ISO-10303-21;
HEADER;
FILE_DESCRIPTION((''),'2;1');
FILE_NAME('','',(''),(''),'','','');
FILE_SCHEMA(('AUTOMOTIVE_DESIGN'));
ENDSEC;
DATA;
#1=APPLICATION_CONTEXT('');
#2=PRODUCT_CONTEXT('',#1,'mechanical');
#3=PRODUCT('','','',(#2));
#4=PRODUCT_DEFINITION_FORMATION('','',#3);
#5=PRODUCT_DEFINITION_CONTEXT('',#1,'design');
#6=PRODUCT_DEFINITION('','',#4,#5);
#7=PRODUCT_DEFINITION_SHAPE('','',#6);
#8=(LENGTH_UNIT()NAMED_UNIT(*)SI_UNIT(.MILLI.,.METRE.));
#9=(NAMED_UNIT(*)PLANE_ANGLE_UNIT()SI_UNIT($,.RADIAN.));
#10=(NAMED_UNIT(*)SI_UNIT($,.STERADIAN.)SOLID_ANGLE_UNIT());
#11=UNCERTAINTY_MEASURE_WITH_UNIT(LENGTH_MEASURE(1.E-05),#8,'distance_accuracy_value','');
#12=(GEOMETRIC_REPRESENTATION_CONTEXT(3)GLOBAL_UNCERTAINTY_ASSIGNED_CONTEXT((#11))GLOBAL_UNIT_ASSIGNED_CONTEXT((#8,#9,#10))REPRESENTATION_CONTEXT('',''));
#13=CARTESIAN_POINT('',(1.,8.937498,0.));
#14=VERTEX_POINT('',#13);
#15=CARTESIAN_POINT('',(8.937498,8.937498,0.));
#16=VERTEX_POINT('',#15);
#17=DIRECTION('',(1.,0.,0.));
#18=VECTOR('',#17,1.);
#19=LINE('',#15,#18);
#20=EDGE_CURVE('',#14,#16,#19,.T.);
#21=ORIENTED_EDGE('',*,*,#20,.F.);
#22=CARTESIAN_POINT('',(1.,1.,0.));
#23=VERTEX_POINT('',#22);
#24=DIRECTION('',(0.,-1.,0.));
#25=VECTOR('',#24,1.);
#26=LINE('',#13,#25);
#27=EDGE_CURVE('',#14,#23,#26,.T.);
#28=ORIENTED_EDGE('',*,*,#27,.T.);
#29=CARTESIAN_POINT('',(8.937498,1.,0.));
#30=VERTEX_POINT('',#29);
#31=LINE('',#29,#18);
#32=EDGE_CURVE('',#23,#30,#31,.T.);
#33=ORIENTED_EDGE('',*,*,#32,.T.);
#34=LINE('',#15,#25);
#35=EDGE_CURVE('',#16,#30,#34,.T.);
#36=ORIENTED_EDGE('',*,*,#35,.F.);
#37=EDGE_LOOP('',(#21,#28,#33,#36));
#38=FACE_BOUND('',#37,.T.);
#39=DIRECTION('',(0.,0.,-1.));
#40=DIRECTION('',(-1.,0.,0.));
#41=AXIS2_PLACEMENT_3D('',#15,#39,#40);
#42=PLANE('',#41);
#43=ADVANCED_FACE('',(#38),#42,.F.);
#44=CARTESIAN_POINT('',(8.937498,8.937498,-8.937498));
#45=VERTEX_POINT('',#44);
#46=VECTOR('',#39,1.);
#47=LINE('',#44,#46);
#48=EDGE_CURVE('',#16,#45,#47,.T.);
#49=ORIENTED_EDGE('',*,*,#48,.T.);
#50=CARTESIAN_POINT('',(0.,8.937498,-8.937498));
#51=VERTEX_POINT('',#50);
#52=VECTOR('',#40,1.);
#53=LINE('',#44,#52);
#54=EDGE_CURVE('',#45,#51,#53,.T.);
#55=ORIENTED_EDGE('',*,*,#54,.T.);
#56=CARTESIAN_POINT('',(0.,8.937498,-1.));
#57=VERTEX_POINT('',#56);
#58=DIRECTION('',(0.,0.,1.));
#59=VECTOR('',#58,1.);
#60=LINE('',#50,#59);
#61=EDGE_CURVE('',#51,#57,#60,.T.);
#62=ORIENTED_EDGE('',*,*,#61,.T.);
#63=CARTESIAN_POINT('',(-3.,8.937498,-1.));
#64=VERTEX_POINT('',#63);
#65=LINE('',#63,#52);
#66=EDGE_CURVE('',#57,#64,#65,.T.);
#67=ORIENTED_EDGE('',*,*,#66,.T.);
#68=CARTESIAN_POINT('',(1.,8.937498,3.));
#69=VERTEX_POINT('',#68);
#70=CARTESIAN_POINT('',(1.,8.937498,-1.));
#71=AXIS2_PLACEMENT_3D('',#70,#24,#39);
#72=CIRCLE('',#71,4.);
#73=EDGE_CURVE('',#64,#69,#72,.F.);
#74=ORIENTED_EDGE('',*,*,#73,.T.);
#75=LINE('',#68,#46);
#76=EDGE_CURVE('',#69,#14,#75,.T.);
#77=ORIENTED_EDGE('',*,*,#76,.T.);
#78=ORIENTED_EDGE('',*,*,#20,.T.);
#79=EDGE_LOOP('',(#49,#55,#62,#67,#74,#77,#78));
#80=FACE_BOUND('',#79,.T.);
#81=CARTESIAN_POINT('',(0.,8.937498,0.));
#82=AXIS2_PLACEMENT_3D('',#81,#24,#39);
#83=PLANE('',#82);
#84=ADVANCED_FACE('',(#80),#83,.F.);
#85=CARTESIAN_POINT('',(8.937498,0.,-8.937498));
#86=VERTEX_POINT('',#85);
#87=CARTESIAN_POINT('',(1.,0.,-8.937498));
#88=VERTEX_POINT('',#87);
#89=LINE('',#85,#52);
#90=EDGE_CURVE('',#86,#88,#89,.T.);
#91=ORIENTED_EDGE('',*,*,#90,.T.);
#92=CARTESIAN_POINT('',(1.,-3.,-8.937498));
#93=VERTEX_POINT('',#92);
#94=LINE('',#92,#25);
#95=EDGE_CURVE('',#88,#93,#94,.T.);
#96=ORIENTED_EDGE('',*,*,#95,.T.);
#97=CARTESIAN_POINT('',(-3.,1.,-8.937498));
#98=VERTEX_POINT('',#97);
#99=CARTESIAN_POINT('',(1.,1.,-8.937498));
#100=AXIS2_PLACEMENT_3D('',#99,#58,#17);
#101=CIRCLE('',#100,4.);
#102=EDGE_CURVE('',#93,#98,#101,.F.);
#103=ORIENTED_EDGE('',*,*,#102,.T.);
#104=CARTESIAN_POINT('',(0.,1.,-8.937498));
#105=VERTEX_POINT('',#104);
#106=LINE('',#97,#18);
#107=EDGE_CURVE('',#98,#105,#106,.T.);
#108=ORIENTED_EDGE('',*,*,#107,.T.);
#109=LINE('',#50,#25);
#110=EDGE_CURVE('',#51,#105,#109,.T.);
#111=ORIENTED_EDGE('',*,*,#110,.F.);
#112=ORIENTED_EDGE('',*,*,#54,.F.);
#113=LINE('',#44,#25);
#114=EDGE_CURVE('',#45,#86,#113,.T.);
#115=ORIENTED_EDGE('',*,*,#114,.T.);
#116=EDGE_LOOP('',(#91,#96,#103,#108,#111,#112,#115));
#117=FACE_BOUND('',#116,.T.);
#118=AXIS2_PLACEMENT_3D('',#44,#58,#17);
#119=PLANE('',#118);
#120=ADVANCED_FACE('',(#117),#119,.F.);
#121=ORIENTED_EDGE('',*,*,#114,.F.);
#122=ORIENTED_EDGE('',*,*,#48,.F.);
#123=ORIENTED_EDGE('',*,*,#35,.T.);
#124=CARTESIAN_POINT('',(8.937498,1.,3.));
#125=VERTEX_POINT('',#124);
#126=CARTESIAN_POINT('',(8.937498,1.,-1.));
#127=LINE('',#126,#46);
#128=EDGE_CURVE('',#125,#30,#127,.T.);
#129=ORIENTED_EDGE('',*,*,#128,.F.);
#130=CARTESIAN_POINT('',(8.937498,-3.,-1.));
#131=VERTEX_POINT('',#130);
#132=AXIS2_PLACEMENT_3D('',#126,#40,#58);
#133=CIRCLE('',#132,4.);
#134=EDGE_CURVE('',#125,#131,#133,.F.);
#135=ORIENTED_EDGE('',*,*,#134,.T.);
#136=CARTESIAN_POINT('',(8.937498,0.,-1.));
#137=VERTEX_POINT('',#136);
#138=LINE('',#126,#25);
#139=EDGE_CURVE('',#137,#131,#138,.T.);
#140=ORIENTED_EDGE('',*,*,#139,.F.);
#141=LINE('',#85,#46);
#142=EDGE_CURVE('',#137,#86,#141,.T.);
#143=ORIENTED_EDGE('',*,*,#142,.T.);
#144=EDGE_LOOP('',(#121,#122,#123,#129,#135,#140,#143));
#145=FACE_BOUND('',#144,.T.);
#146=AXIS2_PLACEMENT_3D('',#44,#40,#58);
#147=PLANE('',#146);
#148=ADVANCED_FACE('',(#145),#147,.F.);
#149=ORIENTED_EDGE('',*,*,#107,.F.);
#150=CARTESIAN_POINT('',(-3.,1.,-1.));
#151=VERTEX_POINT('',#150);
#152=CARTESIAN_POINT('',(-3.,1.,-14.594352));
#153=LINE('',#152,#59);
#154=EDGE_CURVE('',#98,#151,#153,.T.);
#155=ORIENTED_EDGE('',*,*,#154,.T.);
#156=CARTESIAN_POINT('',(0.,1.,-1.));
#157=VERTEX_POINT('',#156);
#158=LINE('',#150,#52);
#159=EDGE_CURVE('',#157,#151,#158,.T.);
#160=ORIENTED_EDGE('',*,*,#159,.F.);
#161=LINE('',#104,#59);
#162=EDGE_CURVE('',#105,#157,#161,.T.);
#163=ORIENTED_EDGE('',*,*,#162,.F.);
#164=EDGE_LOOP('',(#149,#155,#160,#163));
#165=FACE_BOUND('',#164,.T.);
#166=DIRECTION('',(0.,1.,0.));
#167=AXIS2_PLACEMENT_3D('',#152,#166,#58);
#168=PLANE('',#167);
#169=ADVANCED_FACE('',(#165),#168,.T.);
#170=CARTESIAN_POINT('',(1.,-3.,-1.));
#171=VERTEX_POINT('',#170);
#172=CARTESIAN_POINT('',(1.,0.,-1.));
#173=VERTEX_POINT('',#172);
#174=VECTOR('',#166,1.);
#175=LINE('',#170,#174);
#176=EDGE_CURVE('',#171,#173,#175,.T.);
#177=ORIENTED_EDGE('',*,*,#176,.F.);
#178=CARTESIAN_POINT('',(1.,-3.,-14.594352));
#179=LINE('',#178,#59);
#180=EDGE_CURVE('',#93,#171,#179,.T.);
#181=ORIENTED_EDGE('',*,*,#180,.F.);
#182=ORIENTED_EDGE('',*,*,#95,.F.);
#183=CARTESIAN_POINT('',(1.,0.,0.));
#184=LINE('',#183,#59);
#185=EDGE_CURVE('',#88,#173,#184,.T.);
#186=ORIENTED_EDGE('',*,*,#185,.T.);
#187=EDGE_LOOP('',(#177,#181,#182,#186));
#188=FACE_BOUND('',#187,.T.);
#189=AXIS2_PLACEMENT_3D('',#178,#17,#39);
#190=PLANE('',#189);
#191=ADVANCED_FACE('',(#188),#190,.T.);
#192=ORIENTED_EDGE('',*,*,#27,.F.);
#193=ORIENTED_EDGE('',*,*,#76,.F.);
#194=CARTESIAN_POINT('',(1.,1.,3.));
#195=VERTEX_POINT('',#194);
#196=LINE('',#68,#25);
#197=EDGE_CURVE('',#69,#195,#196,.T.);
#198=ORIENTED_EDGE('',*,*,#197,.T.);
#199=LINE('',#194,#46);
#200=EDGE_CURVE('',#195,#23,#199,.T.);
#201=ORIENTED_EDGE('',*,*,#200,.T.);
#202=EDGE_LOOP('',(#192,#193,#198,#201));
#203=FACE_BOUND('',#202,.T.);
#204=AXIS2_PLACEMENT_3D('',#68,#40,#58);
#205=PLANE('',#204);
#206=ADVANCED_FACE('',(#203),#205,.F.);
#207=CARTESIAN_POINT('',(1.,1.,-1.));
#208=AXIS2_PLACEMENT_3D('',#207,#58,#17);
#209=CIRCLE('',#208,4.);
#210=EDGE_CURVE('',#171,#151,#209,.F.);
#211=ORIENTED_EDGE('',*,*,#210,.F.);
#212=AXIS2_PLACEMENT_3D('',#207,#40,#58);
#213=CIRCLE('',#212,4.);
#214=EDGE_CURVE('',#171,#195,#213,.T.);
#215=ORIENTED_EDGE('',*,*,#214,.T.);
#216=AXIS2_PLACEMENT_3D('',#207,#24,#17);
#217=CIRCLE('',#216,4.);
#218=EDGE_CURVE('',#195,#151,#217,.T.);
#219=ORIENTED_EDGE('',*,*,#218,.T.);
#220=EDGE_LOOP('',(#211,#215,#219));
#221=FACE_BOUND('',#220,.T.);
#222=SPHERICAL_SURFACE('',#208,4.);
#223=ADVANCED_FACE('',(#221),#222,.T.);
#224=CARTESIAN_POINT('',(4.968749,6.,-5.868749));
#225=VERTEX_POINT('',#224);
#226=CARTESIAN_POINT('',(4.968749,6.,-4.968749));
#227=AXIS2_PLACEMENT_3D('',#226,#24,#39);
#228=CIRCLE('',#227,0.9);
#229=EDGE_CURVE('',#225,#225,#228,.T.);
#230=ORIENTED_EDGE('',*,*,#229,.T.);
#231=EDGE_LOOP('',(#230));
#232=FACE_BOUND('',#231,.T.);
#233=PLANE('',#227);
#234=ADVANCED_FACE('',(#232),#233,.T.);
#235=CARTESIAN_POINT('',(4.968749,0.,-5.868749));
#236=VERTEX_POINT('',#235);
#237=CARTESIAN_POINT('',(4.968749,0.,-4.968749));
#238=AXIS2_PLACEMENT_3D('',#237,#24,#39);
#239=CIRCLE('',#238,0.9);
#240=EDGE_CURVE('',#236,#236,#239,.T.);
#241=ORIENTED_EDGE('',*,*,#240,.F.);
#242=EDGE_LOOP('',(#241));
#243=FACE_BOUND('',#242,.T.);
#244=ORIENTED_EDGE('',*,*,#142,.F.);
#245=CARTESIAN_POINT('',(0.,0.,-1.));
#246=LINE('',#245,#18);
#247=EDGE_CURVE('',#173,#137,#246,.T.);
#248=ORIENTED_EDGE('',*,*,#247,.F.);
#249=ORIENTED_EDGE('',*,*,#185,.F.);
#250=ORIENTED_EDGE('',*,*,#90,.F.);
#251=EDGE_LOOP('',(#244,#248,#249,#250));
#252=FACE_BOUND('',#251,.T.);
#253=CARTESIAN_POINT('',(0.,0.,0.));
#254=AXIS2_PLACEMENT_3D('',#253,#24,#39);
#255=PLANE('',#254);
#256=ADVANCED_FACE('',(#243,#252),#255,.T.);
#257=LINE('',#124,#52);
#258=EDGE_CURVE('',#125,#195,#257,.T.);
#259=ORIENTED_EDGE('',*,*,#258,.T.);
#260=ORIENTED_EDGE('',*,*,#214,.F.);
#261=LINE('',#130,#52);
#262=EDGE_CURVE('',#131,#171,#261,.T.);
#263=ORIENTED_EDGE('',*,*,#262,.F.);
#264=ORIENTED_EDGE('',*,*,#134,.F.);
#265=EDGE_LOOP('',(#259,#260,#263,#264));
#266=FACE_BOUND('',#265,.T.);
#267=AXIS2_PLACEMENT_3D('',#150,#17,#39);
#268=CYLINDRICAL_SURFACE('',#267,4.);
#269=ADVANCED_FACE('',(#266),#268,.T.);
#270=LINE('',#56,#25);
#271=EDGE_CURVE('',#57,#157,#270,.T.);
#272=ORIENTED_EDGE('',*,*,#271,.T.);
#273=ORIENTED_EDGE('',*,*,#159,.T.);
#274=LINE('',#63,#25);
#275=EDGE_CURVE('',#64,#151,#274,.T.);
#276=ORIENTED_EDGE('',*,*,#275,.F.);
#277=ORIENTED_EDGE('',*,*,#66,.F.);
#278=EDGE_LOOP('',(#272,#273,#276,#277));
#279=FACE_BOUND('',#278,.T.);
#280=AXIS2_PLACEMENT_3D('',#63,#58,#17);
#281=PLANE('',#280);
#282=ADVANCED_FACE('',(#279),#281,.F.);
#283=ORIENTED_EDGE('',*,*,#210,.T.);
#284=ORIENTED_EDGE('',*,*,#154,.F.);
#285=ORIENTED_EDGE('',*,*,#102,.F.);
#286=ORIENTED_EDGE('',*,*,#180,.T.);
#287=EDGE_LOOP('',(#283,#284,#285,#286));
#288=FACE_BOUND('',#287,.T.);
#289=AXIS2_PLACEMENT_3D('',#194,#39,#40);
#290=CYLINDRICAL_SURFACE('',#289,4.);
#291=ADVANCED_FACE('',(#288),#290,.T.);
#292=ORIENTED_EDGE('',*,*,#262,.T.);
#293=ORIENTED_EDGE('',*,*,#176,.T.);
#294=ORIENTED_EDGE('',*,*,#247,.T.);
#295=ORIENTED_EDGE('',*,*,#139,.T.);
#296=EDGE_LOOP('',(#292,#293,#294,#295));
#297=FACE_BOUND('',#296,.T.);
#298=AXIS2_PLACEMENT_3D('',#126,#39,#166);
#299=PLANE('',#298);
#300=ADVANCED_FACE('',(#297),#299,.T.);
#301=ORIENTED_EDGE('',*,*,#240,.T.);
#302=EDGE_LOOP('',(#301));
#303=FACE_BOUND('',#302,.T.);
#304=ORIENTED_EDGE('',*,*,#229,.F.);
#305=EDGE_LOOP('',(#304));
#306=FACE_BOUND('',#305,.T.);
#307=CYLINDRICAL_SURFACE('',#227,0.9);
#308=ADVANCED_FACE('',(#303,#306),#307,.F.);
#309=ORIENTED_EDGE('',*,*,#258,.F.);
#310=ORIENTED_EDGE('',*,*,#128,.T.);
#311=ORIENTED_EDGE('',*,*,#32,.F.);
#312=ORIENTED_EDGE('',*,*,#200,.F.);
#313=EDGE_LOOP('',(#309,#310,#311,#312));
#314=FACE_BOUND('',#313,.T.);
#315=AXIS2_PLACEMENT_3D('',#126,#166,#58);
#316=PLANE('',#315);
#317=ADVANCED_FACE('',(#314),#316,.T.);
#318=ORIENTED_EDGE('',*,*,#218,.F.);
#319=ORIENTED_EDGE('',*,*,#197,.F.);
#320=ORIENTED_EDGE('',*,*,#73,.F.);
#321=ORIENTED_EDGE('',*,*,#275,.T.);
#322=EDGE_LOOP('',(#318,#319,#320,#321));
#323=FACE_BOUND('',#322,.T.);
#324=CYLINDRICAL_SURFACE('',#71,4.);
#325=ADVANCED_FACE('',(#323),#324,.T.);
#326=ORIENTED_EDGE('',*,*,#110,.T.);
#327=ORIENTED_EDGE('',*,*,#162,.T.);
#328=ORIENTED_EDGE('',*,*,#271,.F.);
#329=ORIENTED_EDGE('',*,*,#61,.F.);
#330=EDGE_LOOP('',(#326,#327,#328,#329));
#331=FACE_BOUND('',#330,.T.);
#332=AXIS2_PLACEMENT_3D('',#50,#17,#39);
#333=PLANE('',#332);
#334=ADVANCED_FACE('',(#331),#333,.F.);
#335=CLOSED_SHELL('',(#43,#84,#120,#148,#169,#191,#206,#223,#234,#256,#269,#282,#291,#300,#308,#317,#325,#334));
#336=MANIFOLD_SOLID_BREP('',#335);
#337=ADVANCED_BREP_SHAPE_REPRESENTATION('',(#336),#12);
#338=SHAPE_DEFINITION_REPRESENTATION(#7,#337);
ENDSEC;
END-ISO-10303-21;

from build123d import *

# Parameters (mm, degrees)
BOSS_EXTRUDE1_DEPTH = 8.937498
SKETCH2_W           = 4
SKETCH2_H           = 4
BOSS_EXTRUDE4_DEPTH = 8.937498
SKETCH3_W           = 4
SKETCH3_H           = 4
BOSS_EXTRUDE5_DEPTH = 11.9375
FILLET1_R           = 4
SKETCH4_R           = 0.9
CUT_EXTRUDE1_DEPTH  = 6


with BuildPart() as part:
    # Sketch1 → Boss-Extrude1 (new body)
    with BuildSketch(Plane(origin=(0, 0, 0), x_dir=(1, 0, 0), z_dir=(0, 1, 0))):
        Polygon((8.937498, 8.937498), (0, 8.937498), (0, 1), (-3, 1), (-3, -3), (1, -3), (1, 0), (8.937498, 0), align=None)
    extrude(amount=BOSS_EXTRUDE1_DEPTH)

    # Sketch2 → Boss-Extrude4 (add)
    with BuildSketch(Plane.XY):
        with Locations((-1, -1)):
            Rectangle(SKETCH2_W, SKETCH2_H)
    extrude(amount=-BOSS_EXTRUDE4_DEPTH)

    # Sketch3 → Boss-Extrude5 (add)
    with BuildSketch(Plane.ZY.offset(3)):
        with Locations((1, -1)):
            Rectangle(SKETCH3_W, SKETCH3_H)
    extrude(amount=-BOSS_EXTRUDE5_DEPTH)

    # Fillet1
    fillet1_edges = [part.edges().sort_by_distance(p)[0] for p in [
        (-3, -3, -2.968749),
        (2.96875, -3, 3),
        (-3, 2.968749, 3),
    ]]
    fillet(fillet1_edges, radius=FILLET1_R - 0.0001)  # a hair under: the kernel refuses the full size

    # Sketch4 → Cut-Extrude1 (cut)
    with BuildSketch(Plane.XZ):
        with Locations(Location((4.968749, -4.968749, 0), (0, 0, 270))):
            Circle(SKETCH4_R)
    extrude(amount=-CUT_EXTRUDE1_DEPTH, mode=Mode.SUBTRACT)


solid = part.part
